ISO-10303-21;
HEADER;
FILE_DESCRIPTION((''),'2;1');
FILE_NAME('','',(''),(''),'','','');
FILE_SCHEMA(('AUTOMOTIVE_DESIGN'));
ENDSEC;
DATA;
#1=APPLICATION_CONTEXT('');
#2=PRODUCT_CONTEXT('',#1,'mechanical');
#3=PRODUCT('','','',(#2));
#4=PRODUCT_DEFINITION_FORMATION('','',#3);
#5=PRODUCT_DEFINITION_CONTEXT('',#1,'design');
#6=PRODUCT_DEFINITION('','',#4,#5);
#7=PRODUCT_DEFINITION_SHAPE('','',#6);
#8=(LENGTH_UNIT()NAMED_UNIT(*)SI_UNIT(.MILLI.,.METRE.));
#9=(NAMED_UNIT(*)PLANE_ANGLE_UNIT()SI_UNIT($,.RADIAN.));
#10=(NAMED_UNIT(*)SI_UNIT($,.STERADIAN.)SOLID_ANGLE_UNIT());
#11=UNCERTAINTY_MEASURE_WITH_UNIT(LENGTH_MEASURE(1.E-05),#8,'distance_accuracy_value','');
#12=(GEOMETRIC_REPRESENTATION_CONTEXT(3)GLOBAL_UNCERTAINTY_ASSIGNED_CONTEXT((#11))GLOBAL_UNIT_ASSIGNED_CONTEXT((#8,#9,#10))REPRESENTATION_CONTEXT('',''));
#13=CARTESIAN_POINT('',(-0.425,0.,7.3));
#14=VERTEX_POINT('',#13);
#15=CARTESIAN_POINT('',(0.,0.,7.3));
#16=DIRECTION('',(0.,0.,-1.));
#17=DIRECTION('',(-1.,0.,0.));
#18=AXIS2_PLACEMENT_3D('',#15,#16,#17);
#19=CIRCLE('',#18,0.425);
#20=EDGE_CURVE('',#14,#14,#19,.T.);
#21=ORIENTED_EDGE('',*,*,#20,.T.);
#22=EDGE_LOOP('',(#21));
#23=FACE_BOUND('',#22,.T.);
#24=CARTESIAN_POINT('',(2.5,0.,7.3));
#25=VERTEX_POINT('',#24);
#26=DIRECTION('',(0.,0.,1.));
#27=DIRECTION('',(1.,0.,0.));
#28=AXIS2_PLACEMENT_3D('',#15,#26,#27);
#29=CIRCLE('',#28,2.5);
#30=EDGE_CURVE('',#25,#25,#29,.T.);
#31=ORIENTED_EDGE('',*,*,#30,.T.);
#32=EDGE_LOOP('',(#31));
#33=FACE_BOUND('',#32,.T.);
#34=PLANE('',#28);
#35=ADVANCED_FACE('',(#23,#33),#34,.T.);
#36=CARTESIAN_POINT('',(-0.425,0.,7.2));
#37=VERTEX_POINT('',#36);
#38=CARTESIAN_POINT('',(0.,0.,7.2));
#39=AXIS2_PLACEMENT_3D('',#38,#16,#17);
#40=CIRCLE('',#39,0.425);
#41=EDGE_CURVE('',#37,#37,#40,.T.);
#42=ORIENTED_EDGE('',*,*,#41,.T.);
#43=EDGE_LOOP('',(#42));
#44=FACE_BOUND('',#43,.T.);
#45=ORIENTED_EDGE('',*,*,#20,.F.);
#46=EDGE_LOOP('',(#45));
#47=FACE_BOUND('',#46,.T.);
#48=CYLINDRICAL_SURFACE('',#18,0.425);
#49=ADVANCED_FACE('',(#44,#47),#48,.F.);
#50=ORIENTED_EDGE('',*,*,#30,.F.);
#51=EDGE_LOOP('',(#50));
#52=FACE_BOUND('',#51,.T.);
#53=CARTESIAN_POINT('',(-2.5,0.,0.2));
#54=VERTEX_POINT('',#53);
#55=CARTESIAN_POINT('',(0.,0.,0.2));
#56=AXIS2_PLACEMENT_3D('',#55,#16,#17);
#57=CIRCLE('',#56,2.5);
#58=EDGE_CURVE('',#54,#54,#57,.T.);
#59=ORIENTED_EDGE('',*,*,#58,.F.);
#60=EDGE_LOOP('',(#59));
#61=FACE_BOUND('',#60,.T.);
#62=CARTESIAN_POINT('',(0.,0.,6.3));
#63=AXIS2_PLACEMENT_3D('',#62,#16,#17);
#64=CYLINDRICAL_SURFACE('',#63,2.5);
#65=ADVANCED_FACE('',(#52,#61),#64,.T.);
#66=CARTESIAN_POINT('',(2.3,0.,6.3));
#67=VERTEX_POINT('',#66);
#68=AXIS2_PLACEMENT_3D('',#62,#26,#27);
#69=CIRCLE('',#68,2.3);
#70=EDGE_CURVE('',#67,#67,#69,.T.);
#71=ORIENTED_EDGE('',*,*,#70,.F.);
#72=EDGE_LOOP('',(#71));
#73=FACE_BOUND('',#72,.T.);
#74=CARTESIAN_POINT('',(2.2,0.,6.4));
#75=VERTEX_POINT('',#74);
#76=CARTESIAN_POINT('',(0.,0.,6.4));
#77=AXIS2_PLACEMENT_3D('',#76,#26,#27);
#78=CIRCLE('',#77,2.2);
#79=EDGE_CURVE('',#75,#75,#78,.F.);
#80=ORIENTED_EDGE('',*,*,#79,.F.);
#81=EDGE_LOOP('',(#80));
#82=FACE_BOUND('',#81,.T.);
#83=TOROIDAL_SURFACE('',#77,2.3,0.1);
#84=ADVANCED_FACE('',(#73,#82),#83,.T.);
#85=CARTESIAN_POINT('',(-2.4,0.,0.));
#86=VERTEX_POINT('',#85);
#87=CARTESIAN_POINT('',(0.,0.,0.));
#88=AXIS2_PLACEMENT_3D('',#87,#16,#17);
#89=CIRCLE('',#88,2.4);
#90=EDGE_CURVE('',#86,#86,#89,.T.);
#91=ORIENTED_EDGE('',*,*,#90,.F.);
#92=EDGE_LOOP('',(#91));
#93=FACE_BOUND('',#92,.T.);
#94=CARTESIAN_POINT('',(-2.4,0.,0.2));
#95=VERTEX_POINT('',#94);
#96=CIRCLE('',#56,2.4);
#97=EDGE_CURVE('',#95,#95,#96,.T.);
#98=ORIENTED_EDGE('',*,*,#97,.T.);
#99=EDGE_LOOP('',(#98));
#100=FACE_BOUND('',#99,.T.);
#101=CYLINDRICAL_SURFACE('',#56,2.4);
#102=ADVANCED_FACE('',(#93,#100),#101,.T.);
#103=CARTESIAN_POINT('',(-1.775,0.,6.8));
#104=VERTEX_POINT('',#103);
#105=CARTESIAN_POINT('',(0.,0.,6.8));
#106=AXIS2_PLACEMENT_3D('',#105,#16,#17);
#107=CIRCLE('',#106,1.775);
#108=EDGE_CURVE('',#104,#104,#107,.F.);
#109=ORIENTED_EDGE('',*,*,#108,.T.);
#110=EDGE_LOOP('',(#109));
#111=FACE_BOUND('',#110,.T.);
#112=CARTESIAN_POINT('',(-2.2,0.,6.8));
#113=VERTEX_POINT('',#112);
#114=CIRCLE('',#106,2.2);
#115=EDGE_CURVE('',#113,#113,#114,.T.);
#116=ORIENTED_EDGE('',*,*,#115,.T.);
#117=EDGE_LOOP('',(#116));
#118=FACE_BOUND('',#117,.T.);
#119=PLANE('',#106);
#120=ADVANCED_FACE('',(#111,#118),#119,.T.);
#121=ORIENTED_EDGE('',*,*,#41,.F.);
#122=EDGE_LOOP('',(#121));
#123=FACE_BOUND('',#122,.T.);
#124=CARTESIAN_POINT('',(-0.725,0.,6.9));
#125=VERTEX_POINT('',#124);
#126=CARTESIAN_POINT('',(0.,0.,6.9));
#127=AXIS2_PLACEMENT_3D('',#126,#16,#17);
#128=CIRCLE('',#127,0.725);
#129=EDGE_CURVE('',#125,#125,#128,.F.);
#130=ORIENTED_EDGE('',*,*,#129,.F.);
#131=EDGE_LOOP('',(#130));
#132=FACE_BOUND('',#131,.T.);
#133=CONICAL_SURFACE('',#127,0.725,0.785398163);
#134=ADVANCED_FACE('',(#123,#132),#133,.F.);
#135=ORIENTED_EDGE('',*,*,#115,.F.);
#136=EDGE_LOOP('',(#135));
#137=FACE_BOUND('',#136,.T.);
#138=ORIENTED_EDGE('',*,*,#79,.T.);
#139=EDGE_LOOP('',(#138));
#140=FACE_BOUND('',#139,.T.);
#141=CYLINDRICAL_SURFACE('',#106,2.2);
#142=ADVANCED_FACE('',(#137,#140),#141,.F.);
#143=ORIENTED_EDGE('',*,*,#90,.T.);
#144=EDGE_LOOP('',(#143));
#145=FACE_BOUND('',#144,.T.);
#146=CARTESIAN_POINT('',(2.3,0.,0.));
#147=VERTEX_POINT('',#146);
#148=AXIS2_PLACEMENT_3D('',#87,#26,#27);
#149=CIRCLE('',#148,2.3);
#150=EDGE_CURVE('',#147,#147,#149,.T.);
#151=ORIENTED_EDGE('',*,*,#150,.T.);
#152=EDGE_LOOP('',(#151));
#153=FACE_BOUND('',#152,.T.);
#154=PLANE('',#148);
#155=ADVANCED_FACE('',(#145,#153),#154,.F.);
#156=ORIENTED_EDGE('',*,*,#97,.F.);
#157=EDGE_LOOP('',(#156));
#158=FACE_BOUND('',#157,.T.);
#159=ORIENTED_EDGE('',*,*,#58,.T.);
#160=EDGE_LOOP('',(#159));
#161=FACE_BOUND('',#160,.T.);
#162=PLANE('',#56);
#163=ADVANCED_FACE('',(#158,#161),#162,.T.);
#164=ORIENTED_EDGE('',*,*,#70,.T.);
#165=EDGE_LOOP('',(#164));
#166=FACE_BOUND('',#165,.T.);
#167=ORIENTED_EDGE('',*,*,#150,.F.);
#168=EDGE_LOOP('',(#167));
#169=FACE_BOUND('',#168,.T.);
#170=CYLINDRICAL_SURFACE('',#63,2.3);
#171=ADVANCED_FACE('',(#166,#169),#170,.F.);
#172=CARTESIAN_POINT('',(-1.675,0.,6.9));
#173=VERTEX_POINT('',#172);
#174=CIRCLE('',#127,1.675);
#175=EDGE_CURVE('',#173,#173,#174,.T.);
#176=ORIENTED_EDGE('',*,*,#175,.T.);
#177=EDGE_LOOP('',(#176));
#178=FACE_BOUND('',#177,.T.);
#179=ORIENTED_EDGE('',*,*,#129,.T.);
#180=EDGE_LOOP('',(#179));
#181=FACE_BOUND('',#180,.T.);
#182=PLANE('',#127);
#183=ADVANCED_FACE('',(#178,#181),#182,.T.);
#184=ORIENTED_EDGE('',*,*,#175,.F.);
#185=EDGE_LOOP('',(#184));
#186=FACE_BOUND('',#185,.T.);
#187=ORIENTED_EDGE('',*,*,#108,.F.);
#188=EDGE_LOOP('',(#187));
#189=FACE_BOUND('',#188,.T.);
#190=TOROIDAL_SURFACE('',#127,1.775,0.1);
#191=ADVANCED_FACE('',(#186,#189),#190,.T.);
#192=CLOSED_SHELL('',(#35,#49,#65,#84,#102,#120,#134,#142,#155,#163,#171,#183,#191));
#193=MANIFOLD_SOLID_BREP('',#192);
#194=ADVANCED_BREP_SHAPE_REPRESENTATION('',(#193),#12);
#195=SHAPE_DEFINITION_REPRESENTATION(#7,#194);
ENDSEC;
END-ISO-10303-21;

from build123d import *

# Parameters (mm, degrees)
SKETCH_1_R          = 2.5
SKETCH_1_R_2        = 2.3
EXTRUDE_1_DEPTH     = 6.3
SKETCH_2_R          = 2.5
EXTRUDE_2_DEPTH     = 1
SKETCH_4_R          = 0.425
CUT_EXTRUDE_1_DEPTH = 8.224264668
SKETCH_5_R          = 1.675
CUT_EXTRUDE_2_DEPTH = 0.6
SKETCH_6_R          = 2.2
CUT_EXTRUDE_3_DEPTH = 0.5
FILLET_1_R          = 0.1
FILLET_2_R          = 0.1
CHAMFER_2_SIZE      = 0.3
SKETCH_9_R          = 2.5
SKETCH_9_R_2        = 2.4
CUT_EXTRUDE_4_DEPTH = 0.2


with BuildPart() as part:
    # 스케치1 → 보스-돌출1 (new body)
    with BuildSketch(Plane.XY):
        Circle(SKETCH_1_R)
        Circle(SKETCH_1_R_2, mode=Mode.SUBTRACT)
    extrude(amount=EXTRUDE_1_DEPTH)

    # 스케치2 → 보스-돌출2 (add)
    with BuildSketch(Plane.XY.offset(6.3)):
        Circle(SKETCH_2_R)
    extrude(amount=EXTRUDE_2_DEPTH)

    # 스케치4 → 컷-돌출1 (cut, through all)
    with BuildSketch(Plane(origin=(0, 0, 6.3), x_dir=(-1, 0, 0), z_dir=(0, 0, -1))):
        Circle(SKETCH_4_R)
    extrude(amount=-CUT_EXTRUDE_1_DEPTH, mode=Mode.SUBTRACT)

    # 스케치5 → 컷-돌출2 (cut)
    with BuildSketch(Plane(origin=(0, 0, 6.3), x_dir=(-1, 0, 0), z_dir=(0, 0, -1))):
        Circle(SKETCH_5_R)
    extrude(amount=-CUT_EXTRUDE_2_DEPTH, mode=Mode.SUBTRACT)

    # 스케치6 → 컷-돌출3 (cut)
    with BuildSketch(Plane(origin=(0, 0, 6.3), x_dir=(-1, 0, 0), z_dir=(0, 0, -1))):
        Circle(SKETCH_6_R)
    extrude(amount=-CUT_EXTRUDE_3_DEPTH, mode=Mode.SUBTRACT)

    # 필렛1
    fillet_1_edges = [part.edges().sort_by_distance(p)[0] for p in [
        (2.2, 0, 6.3),
    ]]
    fillet(fillet_1_edges, radius=FILLET_1_R - 0.0001)  # a hair under: the kernel refuses the full size

    # 필렛2
    fillet_2_edges = [part.edges().sort_by_distance(p)[0] for p in [
        (1.675, 0, 6.8),
    ]]
    fillet(fillet_2_edges, radius=FILLET_2_R - 0.0001)  # a hair under: the kernel refuses the full size

    # 모따기2
    chamfer_2_edges = [part.edges().sort_by_distance(p)[0] for p in [
        (0.425, 0, 6.9),
    ]]
    chamfer(chamfer_2_edges, length=CHAMFER_2_SIZE)

    # 스케치9 → 컷-돌출4 (cut)
    with BuildSketch(Plane(origin=(0, 0, 0), x_dir=(-1, 0, 0), z_dir=(0, 0, -1))):
        Circle(SKETCH_9_R)
        Circle(SKETCH_9_R_2, mode=Mode.SUBTRACT)
    extrude(amount=-CUT_EXTRUDE_4_DEPTH, mode=Mode.SUBTRACT)


solid = part.part
